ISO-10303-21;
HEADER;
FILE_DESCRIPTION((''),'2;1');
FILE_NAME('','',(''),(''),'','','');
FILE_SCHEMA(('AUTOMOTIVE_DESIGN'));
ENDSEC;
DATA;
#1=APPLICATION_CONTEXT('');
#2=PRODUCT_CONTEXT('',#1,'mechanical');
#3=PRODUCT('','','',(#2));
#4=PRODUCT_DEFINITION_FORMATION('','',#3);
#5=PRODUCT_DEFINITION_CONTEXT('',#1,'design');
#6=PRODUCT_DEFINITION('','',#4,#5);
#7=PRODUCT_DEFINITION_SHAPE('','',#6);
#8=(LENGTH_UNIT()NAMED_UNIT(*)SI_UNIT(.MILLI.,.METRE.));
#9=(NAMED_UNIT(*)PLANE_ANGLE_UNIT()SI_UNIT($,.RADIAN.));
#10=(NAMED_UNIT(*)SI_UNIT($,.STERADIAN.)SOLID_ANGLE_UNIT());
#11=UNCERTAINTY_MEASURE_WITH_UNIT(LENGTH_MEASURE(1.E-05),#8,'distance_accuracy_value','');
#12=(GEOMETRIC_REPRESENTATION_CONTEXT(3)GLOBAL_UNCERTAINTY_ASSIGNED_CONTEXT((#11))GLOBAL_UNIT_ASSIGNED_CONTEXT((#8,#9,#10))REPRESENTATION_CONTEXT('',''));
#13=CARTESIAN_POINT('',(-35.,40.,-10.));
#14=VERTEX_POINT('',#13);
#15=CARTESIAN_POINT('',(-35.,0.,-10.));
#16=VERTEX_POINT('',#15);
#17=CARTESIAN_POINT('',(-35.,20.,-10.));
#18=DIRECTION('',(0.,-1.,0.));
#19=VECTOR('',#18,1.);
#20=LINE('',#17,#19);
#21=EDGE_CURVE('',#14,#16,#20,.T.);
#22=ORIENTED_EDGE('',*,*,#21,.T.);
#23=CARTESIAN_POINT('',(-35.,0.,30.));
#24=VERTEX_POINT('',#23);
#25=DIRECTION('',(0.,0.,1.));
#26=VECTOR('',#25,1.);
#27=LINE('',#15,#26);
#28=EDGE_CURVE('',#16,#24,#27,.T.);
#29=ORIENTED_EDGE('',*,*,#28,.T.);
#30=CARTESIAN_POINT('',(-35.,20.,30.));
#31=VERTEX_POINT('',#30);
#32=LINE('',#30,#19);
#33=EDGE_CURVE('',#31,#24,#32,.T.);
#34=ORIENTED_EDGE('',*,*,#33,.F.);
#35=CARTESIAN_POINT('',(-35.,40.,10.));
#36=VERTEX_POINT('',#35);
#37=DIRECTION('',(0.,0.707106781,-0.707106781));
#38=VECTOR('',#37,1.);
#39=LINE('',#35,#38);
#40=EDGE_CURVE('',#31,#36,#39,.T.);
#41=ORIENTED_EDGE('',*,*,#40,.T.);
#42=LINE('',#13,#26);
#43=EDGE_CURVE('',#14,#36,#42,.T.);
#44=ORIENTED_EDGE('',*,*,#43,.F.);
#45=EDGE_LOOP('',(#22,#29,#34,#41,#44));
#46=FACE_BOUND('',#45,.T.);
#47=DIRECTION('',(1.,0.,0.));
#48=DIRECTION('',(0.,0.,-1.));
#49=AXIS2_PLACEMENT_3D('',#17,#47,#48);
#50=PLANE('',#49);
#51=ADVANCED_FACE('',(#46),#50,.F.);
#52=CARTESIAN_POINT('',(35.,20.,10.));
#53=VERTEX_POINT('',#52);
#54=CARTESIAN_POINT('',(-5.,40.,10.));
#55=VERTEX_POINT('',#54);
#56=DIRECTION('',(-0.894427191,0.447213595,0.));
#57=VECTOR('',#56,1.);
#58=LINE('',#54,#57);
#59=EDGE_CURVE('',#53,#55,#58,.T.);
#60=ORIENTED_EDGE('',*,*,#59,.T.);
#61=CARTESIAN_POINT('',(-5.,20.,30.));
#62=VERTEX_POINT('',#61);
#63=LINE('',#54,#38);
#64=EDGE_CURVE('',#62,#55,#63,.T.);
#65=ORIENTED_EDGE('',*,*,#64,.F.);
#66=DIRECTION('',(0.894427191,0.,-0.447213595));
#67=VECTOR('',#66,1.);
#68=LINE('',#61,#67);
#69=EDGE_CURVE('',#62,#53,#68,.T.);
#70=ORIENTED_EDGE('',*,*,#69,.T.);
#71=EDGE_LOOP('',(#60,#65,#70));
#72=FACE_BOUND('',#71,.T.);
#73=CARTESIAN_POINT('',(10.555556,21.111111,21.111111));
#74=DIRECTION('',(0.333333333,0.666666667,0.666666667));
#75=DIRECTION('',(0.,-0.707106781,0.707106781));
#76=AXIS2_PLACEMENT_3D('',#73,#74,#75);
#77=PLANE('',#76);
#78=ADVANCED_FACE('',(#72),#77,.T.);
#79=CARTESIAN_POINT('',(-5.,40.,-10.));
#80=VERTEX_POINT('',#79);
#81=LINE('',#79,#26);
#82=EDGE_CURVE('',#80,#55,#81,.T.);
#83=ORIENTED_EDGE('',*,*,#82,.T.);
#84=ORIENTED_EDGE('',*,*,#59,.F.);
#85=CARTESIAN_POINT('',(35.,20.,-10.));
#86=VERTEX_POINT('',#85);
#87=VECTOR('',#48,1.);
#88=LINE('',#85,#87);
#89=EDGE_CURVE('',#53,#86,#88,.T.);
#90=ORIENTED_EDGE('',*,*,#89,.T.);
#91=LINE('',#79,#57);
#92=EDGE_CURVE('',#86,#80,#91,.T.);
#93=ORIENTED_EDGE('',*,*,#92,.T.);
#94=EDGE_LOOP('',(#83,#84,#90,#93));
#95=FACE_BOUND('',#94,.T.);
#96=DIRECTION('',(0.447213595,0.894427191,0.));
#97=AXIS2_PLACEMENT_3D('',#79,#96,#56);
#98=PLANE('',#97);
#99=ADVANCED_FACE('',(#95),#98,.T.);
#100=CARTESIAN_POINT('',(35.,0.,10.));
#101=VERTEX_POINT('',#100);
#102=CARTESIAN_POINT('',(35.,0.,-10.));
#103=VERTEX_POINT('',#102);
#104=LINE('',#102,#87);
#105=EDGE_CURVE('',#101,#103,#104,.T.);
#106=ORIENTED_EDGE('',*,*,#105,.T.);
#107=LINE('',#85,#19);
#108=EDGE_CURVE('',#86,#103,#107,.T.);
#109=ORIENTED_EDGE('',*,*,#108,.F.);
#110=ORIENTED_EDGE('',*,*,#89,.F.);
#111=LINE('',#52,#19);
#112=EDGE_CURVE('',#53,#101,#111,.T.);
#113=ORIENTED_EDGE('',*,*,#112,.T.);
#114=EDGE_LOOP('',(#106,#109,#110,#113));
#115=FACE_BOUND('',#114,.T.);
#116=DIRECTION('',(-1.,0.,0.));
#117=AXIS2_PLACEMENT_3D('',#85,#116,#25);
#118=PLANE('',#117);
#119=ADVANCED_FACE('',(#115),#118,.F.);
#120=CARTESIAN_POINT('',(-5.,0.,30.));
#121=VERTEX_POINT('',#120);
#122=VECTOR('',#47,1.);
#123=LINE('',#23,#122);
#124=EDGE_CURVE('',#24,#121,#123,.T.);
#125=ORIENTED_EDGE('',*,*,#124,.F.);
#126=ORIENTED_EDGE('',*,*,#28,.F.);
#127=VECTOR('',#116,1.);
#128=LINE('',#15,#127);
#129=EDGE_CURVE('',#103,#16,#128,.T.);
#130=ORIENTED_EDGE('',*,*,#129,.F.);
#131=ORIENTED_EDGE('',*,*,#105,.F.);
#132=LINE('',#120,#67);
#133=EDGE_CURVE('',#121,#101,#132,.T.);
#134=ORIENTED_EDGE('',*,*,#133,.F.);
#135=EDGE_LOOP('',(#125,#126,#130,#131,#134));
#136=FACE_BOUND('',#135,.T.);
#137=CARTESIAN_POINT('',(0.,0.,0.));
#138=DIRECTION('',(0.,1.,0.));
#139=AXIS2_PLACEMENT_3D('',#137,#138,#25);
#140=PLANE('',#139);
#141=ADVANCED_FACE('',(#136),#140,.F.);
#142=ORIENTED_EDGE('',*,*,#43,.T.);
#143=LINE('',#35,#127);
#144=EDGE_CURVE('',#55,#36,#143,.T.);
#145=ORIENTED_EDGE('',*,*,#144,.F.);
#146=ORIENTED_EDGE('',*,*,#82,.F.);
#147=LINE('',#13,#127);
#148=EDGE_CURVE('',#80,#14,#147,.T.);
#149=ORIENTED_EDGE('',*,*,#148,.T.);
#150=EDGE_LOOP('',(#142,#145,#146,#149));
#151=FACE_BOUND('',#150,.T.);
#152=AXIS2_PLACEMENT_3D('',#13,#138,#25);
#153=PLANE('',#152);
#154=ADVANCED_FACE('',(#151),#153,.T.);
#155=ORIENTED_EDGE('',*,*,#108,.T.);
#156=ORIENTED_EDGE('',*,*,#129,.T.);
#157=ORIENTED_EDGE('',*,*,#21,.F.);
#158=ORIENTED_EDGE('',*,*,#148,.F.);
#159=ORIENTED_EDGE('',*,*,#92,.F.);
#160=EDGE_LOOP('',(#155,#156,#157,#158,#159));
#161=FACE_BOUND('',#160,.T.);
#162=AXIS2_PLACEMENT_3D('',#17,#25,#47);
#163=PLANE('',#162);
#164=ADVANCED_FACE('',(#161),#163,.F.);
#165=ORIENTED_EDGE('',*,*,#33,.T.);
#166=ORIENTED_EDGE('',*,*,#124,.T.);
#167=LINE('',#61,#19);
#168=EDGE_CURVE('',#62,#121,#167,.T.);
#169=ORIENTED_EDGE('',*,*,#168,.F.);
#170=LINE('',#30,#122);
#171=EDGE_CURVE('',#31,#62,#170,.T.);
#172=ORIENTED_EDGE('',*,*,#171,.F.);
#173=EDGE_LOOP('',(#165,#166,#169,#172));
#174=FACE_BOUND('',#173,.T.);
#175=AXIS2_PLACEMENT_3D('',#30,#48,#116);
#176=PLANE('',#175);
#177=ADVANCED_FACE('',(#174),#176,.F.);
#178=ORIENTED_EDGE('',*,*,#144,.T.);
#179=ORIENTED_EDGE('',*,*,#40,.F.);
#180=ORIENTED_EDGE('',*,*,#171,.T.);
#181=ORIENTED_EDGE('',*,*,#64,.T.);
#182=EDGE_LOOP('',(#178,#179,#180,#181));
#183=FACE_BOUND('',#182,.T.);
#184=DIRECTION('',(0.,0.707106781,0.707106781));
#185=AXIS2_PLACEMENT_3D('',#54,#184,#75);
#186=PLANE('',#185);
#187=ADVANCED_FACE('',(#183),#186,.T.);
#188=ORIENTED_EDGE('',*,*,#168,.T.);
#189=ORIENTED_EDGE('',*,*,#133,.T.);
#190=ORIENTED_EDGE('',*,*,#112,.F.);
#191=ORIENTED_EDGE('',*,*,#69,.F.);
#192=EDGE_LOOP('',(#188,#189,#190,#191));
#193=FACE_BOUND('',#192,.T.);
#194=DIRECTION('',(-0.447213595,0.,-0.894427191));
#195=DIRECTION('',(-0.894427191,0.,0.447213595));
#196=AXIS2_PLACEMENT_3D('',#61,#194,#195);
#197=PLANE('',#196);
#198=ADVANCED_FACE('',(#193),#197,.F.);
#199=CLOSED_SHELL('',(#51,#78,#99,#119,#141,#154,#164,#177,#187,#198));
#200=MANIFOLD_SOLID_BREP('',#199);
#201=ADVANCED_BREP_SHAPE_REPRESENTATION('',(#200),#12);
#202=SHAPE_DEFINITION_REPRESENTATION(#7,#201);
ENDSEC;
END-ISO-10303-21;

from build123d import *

# Parameters (mm, degrees)
SKETCH1_W           = 70
SKETCH1_H           = 20
BOSS_EXTRUDE1_DEPTH = 20
BOSS_EXTRUDE2_DEPTH = 20
BOSS_EXTRUDE3_DEPTH = 20
BOSS_EXTRUDE4_DEPTH = 30
BOSS_EXTRUDE6_START = 17
BOSS_EXTRUDE6_DEPTH = 14.666666667


with BuildPart() as part:
    # Sketch1 → Boss-Extrude1 (new body)
    with BuildSketch(Plane(origin=(0, 0, 0), x_dir=(1, 0, 0), z_dir=(0, 1, 0))):
        Rectangle(SKETCH1_W, SKETCH1_H)
    extrude(amount=BOSS_EXTRUDE1_DEPTH)

    # Sketch2 → Boss-Extrude2 (add)
    with BuildSketch(Plane.XY.offset(10)):
        Polygon((-35, 20), (-35, 40), (-5, 40), (35, 20), align=None)
    extrude(amount=-BOSS_EXTRUDE2_DEPTH)

    # Sketch4 → Boss-Extrude3 (add)
    with BuildSketch(Plane.XZ):
        Polygon((-35, 10), (-35, 30), (-5, 30), (35, 10), align=None)
    extrude(amount=-BOSS_EXTRUDE3_DEPTH)

    # Sketch5 → Boss-Extrude4 (add)
    with BuildSketch(Plane.ZY.offset(35)):
        Polygon((10, 40), (30, 20), (10, 20), align=None)
    extrude(amount=-BOSS_EXTRUDE4_DEPTH)

    # Boss-Extrude6: read off the stored shape, not the designer's step
    # Boss-Extrude6 outline → Boss-Extrude6 (add)
    with BuildSketch(Plane(origin=(0, 0, 0), x_dir=(0.9428090415820636, -0.23570226039551556, -0.2357022603955156), z_dir=(0.3333333333333329, 0.6666666666666667, 0.6666666666666669)).offset(BOSS_EXTRUDE6_START)):
        Polygon((-16.499158228, -7.071067812), (25.927248644, 7.071067812), (-16.499158228, 21.213203436), align=None)
    extrude(amount=BOSS_EXTRUDE6_DEPTH)


solid = part.part
